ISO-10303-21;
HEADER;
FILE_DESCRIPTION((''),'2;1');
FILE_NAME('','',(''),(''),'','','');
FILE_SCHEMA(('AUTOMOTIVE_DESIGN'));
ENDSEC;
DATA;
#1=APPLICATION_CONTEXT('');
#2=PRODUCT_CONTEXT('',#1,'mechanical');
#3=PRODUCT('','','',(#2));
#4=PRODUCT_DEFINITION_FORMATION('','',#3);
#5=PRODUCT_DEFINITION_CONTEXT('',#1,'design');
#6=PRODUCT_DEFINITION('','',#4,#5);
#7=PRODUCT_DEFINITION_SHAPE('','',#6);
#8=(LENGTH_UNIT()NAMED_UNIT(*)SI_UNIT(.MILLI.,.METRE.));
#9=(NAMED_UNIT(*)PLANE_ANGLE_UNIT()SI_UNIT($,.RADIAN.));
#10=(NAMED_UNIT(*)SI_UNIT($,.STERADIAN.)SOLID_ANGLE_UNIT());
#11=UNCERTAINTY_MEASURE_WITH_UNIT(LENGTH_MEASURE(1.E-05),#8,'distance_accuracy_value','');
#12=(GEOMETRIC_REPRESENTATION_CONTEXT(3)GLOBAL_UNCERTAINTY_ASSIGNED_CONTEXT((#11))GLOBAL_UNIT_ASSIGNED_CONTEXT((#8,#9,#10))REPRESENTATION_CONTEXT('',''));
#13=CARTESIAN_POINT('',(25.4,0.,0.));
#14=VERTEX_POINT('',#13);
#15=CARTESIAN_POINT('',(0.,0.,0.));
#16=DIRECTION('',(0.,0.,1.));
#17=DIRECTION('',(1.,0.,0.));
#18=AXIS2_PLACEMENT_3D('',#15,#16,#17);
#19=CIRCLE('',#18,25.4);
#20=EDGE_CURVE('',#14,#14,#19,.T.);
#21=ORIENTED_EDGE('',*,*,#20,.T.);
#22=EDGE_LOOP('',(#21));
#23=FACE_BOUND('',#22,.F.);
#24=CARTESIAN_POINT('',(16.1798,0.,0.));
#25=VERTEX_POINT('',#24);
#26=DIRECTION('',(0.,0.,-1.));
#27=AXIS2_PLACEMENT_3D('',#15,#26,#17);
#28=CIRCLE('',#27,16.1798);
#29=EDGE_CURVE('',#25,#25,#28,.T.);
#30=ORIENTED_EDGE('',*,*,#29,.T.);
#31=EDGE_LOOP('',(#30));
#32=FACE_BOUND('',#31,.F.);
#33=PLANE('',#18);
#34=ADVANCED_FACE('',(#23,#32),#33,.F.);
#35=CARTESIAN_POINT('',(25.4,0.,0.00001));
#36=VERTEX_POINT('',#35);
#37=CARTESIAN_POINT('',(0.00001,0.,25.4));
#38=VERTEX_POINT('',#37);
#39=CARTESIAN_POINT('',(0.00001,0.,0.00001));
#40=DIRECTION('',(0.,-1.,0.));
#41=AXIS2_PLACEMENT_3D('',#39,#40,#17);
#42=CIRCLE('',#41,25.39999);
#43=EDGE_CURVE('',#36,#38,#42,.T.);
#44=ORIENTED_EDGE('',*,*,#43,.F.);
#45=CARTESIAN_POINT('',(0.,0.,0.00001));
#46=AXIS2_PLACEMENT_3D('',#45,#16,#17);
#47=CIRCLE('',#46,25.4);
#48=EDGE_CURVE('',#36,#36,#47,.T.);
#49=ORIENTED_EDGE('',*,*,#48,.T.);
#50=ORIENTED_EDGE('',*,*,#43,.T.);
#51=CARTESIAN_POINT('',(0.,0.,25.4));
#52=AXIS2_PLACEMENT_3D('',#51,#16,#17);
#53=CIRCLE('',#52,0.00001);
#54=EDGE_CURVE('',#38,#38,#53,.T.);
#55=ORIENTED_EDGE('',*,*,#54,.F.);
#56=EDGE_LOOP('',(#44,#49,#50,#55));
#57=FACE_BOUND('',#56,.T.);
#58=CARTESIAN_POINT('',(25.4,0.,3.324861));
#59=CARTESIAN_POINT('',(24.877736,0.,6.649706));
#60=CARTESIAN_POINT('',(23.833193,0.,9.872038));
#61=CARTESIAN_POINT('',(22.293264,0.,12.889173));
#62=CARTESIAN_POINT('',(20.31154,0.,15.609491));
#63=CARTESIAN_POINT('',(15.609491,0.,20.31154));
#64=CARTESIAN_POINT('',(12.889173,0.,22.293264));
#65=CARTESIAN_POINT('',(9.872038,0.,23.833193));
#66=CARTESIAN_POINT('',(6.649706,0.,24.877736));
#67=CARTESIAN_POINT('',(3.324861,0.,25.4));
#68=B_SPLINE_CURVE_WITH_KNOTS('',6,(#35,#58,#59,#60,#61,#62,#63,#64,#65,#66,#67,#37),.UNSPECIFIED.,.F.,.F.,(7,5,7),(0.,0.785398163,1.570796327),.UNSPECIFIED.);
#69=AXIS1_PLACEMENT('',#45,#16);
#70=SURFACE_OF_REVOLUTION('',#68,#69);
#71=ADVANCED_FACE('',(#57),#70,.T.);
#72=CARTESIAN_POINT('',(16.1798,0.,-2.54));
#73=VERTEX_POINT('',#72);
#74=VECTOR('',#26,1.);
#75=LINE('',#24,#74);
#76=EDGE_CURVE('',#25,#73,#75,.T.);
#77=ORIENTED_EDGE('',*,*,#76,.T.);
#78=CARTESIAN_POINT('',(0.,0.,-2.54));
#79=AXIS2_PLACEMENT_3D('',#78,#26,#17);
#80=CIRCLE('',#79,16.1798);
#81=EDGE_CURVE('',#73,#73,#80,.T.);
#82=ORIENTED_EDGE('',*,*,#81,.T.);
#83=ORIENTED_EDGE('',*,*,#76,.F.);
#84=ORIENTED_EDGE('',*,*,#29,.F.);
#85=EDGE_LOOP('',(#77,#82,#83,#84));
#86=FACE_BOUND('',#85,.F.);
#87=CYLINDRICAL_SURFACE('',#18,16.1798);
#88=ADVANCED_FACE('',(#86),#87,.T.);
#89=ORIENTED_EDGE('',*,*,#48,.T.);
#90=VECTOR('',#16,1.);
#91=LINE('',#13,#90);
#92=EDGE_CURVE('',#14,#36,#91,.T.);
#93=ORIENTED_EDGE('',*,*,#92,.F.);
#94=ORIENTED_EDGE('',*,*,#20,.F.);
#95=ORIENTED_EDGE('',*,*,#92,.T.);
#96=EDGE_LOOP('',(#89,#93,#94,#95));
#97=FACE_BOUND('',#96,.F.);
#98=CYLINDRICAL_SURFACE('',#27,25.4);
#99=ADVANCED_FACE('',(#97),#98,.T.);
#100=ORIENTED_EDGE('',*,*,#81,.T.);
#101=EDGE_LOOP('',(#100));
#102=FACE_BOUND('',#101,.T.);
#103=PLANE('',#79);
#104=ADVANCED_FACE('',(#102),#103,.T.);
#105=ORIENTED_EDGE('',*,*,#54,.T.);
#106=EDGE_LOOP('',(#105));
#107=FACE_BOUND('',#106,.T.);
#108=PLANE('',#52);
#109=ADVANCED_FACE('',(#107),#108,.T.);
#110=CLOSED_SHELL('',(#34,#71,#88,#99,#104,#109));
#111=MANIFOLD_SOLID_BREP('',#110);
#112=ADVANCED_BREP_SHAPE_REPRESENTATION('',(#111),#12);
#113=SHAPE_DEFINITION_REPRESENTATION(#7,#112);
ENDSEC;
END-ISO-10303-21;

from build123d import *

# Parameters (mm, degrees)
F1_R     = 25.4
F2_DEPTH = 25.4
F3_R     = 25.39999
F4_R     = 16.1798
F5_DEPTH = 2.54


# Not quite as in the source:
# - a variable given as a bare number and used for a length is read in inches; the dataset says mm whatever the document's units were
# - a fillet or chamfer is up to 0.001 mm smaller than in the source, because OpenCascade refuses the exact size


with BuildPart() as f2:
    # F1 (on Top) → F2 (new body)
    with BuildSketch(Plane.XY):
        Circle(F1_R)
    extrude(amount=F2_DEPTH)

    # F3 (radius 25.4 in the source; OpenCascade refuses exactly that, so slightly less here)
    f3_edges = [f2.edges().sort_by_distance(p)[0] for p in [
        (-25.4, 0, 25.4),
    ]]
    fillet(f3_edges, radius=F3_R)

    # F4 (on face) → F5 (join)
    with BuildSketch(Plane(origin=(0, 0, 0), x_dir=(1, 0, 0), z_dir=(0, 0, -1))):
        Circle(F4_R)
    extrude(amount=F5_DEPTH)


solid = f2.part
